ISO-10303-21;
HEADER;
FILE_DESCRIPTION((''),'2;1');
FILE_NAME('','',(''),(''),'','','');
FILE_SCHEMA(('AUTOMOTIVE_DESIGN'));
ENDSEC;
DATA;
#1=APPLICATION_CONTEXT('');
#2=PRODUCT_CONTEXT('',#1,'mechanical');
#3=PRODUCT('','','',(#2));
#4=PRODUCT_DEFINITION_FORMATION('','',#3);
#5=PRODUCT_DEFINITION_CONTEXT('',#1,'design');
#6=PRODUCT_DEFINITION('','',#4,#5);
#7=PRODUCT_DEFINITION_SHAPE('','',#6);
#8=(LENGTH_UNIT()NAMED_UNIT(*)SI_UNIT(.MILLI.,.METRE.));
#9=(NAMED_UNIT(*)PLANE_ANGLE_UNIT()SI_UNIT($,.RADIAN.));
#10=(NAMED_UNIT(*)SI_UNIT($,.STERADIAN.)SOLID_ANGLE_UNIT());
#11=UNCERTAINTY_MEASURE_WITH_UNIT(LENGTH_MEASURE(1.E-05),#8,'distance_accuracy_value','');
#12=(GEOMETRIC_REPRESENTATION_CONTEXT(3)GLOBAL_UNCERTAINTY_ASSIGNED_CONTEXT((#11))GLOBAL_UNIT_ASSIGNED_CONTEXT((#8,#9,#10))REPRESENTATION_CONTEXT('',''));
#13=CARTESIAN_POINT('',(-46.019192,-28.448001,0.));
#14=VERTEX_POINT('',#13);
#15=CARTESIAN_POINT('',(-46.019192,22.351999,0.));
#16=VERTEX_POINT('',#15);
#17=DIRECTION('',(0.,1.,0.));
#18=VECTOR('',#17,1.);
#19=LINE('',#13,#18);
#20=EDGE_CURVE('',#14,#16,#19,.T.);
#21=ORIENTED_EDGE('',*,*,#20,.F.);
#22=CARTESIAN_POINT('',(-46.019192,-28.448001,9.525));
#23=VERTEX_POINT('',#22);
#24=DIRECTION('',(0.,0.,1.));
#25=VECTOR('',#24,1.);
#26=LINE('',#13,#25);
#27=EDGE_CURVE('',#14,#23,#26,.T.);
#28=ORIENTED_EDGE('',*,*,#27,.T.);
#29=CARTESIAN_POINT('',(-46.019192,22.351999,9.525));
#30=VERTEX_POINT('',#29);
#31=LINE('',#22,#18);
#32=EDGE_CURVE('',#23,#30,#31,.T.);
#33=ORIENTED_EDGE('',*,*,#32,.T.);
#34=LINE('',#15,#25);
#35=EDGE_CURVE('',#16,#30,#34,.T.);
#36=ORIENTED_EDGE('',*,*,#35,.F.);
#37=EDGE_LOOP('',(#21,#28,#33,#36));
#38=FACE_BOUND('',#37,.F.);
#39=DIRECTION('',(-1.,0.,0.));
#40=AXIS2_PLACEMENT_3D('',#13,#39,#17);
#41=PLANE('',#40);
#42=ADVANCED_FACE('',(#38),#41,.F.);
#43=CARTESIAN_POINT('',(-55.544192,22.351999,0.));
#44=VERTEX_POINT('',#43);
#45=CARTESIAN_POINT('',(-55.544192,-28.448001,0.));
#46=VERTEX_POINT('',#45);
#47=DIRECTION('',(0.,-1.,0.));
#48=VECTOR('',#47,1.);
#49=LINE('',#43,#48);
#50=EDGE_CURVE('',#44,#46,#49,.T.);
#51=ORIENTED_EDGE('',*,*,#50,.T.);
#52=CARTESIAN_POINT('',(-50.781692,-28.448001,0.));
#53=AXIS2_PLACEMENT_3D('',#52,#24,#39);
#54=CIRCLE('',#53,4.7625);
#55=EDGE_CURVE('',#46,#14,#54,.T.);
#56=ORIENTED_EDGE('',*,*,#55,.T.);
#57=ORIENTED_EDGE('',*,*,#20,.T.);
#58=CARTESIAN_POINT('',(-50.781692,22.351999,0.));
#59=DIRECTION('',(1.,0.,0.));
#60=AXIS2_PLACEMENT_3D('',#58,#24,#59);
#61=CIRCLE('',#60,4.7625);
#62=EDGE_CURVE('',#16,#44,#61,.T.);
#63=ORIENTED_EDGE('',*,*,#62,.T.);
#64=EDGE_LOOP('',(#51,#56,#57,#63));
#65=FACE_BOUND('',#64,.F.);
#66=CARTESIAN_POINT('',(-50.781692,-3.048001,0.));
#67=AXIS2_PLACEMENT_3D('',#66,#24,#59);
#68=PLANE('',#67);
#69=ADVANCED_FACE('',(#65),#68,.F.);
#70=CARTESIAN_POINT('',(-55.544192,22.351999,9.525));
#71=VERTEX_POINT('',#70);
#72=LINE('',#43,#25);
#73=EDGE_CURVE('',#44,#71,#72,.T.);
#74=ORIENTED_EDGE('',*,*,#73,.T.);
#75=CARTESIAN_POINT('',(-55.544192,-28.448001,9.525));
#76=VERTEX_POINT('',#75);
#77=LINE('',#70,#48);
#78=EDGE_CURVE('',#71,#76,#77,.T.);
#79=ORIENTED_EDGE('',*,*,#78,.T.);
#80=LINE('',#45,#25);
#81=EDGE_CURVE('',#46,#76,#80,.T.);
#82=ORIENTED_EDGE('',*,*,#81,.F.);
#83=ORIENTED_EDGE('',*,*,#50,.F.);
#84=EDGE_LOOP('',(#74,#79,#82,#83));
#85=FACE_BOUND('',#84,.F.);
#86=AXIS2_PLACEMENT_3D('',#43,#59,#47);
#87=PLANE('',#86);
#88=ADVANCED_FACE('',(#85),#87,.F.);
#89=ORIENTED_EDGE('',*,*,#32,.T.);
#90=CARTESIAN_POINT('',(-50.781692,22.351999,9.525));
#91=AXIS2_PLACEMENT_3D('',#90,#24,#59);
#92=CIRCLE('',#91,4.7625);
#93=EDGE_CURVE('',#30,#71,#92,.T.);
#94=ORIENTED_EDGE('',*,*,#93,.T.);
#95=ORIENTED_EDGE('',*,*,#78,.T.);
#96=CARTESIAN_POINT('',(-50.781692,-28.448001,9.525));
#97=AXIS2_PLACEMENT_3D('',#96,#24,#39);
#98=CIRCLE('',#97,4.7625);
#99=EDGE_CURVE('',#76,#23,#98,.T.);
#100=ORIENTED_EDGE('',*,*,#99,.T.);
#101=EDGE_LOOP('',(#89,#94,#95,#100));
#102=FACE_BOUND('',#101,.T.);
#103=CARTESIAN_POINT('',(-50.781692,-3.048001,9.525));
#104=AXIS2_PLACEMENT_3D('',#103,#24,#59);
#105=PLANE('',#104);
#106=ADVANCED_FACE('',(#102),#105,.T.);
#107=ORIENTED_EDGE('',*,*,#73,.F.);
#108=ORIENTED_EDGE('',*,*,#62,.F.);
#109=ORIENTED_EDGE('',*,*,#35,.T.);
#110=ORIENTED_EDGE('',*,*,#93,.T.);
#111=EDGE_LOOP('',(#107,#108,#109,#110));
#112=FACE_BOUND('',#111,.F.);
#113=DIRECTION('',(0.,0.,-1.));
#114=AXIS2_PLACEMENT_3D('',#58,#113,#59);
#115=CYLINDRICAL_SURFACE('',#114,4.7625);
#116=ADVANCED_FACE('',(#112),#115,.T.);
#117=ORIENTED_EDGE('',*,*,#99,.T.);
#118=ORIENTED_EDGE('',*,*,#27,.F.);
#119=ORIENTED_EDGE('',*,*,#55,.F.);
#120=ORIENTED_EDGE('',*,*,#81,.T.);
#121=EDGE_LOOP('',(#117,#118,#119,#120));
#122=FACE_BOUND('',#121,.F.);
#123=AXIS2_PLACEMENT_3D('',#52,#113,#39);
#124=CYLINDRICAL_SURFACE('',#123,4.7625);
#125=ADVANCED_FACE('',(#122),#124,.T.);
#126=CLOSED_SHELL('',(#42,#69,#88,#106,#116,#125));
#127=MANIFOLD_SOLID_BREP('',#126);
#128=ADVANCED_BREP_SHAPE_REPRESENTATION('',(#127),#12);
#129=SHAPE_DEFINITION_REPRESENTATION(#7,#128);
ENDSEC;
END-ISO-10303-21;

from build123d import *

# Parameters (mm, degrees)
F1_DEPTH = 9.525


# Not quite as in the source:
# - a length typed as a fraction of an inch, garbled in the dataset ("3 / 203.2 mm" for 3/8 in), is restored


with BuildPart() as f1:
    # F0 (on Top) → F1 (new body)
    with BuildSketch(Plane.XY):
        with BuildLine():
            ThreePointArc((-46.0191917587, 22.3519991428), (-50.7816917587, 27.1144991428), (-55.5441917587, 22.3519991428))
            Line((-55.5441917587, 22.3519991428), (-55.5441917587, -28.4480008572))
            ThreePointArc((-55.5441917587, -28.4480008572), (-50.7816917587, -33.2105008572), (-46.0191917587, -28.4480008572))
            Line((-46.0191917587, -28.4480008572), (-46.0191917587, 22.3519991428))
        make_face()
    extrude(amount=F1_DEPTH)


solid = f1.part
